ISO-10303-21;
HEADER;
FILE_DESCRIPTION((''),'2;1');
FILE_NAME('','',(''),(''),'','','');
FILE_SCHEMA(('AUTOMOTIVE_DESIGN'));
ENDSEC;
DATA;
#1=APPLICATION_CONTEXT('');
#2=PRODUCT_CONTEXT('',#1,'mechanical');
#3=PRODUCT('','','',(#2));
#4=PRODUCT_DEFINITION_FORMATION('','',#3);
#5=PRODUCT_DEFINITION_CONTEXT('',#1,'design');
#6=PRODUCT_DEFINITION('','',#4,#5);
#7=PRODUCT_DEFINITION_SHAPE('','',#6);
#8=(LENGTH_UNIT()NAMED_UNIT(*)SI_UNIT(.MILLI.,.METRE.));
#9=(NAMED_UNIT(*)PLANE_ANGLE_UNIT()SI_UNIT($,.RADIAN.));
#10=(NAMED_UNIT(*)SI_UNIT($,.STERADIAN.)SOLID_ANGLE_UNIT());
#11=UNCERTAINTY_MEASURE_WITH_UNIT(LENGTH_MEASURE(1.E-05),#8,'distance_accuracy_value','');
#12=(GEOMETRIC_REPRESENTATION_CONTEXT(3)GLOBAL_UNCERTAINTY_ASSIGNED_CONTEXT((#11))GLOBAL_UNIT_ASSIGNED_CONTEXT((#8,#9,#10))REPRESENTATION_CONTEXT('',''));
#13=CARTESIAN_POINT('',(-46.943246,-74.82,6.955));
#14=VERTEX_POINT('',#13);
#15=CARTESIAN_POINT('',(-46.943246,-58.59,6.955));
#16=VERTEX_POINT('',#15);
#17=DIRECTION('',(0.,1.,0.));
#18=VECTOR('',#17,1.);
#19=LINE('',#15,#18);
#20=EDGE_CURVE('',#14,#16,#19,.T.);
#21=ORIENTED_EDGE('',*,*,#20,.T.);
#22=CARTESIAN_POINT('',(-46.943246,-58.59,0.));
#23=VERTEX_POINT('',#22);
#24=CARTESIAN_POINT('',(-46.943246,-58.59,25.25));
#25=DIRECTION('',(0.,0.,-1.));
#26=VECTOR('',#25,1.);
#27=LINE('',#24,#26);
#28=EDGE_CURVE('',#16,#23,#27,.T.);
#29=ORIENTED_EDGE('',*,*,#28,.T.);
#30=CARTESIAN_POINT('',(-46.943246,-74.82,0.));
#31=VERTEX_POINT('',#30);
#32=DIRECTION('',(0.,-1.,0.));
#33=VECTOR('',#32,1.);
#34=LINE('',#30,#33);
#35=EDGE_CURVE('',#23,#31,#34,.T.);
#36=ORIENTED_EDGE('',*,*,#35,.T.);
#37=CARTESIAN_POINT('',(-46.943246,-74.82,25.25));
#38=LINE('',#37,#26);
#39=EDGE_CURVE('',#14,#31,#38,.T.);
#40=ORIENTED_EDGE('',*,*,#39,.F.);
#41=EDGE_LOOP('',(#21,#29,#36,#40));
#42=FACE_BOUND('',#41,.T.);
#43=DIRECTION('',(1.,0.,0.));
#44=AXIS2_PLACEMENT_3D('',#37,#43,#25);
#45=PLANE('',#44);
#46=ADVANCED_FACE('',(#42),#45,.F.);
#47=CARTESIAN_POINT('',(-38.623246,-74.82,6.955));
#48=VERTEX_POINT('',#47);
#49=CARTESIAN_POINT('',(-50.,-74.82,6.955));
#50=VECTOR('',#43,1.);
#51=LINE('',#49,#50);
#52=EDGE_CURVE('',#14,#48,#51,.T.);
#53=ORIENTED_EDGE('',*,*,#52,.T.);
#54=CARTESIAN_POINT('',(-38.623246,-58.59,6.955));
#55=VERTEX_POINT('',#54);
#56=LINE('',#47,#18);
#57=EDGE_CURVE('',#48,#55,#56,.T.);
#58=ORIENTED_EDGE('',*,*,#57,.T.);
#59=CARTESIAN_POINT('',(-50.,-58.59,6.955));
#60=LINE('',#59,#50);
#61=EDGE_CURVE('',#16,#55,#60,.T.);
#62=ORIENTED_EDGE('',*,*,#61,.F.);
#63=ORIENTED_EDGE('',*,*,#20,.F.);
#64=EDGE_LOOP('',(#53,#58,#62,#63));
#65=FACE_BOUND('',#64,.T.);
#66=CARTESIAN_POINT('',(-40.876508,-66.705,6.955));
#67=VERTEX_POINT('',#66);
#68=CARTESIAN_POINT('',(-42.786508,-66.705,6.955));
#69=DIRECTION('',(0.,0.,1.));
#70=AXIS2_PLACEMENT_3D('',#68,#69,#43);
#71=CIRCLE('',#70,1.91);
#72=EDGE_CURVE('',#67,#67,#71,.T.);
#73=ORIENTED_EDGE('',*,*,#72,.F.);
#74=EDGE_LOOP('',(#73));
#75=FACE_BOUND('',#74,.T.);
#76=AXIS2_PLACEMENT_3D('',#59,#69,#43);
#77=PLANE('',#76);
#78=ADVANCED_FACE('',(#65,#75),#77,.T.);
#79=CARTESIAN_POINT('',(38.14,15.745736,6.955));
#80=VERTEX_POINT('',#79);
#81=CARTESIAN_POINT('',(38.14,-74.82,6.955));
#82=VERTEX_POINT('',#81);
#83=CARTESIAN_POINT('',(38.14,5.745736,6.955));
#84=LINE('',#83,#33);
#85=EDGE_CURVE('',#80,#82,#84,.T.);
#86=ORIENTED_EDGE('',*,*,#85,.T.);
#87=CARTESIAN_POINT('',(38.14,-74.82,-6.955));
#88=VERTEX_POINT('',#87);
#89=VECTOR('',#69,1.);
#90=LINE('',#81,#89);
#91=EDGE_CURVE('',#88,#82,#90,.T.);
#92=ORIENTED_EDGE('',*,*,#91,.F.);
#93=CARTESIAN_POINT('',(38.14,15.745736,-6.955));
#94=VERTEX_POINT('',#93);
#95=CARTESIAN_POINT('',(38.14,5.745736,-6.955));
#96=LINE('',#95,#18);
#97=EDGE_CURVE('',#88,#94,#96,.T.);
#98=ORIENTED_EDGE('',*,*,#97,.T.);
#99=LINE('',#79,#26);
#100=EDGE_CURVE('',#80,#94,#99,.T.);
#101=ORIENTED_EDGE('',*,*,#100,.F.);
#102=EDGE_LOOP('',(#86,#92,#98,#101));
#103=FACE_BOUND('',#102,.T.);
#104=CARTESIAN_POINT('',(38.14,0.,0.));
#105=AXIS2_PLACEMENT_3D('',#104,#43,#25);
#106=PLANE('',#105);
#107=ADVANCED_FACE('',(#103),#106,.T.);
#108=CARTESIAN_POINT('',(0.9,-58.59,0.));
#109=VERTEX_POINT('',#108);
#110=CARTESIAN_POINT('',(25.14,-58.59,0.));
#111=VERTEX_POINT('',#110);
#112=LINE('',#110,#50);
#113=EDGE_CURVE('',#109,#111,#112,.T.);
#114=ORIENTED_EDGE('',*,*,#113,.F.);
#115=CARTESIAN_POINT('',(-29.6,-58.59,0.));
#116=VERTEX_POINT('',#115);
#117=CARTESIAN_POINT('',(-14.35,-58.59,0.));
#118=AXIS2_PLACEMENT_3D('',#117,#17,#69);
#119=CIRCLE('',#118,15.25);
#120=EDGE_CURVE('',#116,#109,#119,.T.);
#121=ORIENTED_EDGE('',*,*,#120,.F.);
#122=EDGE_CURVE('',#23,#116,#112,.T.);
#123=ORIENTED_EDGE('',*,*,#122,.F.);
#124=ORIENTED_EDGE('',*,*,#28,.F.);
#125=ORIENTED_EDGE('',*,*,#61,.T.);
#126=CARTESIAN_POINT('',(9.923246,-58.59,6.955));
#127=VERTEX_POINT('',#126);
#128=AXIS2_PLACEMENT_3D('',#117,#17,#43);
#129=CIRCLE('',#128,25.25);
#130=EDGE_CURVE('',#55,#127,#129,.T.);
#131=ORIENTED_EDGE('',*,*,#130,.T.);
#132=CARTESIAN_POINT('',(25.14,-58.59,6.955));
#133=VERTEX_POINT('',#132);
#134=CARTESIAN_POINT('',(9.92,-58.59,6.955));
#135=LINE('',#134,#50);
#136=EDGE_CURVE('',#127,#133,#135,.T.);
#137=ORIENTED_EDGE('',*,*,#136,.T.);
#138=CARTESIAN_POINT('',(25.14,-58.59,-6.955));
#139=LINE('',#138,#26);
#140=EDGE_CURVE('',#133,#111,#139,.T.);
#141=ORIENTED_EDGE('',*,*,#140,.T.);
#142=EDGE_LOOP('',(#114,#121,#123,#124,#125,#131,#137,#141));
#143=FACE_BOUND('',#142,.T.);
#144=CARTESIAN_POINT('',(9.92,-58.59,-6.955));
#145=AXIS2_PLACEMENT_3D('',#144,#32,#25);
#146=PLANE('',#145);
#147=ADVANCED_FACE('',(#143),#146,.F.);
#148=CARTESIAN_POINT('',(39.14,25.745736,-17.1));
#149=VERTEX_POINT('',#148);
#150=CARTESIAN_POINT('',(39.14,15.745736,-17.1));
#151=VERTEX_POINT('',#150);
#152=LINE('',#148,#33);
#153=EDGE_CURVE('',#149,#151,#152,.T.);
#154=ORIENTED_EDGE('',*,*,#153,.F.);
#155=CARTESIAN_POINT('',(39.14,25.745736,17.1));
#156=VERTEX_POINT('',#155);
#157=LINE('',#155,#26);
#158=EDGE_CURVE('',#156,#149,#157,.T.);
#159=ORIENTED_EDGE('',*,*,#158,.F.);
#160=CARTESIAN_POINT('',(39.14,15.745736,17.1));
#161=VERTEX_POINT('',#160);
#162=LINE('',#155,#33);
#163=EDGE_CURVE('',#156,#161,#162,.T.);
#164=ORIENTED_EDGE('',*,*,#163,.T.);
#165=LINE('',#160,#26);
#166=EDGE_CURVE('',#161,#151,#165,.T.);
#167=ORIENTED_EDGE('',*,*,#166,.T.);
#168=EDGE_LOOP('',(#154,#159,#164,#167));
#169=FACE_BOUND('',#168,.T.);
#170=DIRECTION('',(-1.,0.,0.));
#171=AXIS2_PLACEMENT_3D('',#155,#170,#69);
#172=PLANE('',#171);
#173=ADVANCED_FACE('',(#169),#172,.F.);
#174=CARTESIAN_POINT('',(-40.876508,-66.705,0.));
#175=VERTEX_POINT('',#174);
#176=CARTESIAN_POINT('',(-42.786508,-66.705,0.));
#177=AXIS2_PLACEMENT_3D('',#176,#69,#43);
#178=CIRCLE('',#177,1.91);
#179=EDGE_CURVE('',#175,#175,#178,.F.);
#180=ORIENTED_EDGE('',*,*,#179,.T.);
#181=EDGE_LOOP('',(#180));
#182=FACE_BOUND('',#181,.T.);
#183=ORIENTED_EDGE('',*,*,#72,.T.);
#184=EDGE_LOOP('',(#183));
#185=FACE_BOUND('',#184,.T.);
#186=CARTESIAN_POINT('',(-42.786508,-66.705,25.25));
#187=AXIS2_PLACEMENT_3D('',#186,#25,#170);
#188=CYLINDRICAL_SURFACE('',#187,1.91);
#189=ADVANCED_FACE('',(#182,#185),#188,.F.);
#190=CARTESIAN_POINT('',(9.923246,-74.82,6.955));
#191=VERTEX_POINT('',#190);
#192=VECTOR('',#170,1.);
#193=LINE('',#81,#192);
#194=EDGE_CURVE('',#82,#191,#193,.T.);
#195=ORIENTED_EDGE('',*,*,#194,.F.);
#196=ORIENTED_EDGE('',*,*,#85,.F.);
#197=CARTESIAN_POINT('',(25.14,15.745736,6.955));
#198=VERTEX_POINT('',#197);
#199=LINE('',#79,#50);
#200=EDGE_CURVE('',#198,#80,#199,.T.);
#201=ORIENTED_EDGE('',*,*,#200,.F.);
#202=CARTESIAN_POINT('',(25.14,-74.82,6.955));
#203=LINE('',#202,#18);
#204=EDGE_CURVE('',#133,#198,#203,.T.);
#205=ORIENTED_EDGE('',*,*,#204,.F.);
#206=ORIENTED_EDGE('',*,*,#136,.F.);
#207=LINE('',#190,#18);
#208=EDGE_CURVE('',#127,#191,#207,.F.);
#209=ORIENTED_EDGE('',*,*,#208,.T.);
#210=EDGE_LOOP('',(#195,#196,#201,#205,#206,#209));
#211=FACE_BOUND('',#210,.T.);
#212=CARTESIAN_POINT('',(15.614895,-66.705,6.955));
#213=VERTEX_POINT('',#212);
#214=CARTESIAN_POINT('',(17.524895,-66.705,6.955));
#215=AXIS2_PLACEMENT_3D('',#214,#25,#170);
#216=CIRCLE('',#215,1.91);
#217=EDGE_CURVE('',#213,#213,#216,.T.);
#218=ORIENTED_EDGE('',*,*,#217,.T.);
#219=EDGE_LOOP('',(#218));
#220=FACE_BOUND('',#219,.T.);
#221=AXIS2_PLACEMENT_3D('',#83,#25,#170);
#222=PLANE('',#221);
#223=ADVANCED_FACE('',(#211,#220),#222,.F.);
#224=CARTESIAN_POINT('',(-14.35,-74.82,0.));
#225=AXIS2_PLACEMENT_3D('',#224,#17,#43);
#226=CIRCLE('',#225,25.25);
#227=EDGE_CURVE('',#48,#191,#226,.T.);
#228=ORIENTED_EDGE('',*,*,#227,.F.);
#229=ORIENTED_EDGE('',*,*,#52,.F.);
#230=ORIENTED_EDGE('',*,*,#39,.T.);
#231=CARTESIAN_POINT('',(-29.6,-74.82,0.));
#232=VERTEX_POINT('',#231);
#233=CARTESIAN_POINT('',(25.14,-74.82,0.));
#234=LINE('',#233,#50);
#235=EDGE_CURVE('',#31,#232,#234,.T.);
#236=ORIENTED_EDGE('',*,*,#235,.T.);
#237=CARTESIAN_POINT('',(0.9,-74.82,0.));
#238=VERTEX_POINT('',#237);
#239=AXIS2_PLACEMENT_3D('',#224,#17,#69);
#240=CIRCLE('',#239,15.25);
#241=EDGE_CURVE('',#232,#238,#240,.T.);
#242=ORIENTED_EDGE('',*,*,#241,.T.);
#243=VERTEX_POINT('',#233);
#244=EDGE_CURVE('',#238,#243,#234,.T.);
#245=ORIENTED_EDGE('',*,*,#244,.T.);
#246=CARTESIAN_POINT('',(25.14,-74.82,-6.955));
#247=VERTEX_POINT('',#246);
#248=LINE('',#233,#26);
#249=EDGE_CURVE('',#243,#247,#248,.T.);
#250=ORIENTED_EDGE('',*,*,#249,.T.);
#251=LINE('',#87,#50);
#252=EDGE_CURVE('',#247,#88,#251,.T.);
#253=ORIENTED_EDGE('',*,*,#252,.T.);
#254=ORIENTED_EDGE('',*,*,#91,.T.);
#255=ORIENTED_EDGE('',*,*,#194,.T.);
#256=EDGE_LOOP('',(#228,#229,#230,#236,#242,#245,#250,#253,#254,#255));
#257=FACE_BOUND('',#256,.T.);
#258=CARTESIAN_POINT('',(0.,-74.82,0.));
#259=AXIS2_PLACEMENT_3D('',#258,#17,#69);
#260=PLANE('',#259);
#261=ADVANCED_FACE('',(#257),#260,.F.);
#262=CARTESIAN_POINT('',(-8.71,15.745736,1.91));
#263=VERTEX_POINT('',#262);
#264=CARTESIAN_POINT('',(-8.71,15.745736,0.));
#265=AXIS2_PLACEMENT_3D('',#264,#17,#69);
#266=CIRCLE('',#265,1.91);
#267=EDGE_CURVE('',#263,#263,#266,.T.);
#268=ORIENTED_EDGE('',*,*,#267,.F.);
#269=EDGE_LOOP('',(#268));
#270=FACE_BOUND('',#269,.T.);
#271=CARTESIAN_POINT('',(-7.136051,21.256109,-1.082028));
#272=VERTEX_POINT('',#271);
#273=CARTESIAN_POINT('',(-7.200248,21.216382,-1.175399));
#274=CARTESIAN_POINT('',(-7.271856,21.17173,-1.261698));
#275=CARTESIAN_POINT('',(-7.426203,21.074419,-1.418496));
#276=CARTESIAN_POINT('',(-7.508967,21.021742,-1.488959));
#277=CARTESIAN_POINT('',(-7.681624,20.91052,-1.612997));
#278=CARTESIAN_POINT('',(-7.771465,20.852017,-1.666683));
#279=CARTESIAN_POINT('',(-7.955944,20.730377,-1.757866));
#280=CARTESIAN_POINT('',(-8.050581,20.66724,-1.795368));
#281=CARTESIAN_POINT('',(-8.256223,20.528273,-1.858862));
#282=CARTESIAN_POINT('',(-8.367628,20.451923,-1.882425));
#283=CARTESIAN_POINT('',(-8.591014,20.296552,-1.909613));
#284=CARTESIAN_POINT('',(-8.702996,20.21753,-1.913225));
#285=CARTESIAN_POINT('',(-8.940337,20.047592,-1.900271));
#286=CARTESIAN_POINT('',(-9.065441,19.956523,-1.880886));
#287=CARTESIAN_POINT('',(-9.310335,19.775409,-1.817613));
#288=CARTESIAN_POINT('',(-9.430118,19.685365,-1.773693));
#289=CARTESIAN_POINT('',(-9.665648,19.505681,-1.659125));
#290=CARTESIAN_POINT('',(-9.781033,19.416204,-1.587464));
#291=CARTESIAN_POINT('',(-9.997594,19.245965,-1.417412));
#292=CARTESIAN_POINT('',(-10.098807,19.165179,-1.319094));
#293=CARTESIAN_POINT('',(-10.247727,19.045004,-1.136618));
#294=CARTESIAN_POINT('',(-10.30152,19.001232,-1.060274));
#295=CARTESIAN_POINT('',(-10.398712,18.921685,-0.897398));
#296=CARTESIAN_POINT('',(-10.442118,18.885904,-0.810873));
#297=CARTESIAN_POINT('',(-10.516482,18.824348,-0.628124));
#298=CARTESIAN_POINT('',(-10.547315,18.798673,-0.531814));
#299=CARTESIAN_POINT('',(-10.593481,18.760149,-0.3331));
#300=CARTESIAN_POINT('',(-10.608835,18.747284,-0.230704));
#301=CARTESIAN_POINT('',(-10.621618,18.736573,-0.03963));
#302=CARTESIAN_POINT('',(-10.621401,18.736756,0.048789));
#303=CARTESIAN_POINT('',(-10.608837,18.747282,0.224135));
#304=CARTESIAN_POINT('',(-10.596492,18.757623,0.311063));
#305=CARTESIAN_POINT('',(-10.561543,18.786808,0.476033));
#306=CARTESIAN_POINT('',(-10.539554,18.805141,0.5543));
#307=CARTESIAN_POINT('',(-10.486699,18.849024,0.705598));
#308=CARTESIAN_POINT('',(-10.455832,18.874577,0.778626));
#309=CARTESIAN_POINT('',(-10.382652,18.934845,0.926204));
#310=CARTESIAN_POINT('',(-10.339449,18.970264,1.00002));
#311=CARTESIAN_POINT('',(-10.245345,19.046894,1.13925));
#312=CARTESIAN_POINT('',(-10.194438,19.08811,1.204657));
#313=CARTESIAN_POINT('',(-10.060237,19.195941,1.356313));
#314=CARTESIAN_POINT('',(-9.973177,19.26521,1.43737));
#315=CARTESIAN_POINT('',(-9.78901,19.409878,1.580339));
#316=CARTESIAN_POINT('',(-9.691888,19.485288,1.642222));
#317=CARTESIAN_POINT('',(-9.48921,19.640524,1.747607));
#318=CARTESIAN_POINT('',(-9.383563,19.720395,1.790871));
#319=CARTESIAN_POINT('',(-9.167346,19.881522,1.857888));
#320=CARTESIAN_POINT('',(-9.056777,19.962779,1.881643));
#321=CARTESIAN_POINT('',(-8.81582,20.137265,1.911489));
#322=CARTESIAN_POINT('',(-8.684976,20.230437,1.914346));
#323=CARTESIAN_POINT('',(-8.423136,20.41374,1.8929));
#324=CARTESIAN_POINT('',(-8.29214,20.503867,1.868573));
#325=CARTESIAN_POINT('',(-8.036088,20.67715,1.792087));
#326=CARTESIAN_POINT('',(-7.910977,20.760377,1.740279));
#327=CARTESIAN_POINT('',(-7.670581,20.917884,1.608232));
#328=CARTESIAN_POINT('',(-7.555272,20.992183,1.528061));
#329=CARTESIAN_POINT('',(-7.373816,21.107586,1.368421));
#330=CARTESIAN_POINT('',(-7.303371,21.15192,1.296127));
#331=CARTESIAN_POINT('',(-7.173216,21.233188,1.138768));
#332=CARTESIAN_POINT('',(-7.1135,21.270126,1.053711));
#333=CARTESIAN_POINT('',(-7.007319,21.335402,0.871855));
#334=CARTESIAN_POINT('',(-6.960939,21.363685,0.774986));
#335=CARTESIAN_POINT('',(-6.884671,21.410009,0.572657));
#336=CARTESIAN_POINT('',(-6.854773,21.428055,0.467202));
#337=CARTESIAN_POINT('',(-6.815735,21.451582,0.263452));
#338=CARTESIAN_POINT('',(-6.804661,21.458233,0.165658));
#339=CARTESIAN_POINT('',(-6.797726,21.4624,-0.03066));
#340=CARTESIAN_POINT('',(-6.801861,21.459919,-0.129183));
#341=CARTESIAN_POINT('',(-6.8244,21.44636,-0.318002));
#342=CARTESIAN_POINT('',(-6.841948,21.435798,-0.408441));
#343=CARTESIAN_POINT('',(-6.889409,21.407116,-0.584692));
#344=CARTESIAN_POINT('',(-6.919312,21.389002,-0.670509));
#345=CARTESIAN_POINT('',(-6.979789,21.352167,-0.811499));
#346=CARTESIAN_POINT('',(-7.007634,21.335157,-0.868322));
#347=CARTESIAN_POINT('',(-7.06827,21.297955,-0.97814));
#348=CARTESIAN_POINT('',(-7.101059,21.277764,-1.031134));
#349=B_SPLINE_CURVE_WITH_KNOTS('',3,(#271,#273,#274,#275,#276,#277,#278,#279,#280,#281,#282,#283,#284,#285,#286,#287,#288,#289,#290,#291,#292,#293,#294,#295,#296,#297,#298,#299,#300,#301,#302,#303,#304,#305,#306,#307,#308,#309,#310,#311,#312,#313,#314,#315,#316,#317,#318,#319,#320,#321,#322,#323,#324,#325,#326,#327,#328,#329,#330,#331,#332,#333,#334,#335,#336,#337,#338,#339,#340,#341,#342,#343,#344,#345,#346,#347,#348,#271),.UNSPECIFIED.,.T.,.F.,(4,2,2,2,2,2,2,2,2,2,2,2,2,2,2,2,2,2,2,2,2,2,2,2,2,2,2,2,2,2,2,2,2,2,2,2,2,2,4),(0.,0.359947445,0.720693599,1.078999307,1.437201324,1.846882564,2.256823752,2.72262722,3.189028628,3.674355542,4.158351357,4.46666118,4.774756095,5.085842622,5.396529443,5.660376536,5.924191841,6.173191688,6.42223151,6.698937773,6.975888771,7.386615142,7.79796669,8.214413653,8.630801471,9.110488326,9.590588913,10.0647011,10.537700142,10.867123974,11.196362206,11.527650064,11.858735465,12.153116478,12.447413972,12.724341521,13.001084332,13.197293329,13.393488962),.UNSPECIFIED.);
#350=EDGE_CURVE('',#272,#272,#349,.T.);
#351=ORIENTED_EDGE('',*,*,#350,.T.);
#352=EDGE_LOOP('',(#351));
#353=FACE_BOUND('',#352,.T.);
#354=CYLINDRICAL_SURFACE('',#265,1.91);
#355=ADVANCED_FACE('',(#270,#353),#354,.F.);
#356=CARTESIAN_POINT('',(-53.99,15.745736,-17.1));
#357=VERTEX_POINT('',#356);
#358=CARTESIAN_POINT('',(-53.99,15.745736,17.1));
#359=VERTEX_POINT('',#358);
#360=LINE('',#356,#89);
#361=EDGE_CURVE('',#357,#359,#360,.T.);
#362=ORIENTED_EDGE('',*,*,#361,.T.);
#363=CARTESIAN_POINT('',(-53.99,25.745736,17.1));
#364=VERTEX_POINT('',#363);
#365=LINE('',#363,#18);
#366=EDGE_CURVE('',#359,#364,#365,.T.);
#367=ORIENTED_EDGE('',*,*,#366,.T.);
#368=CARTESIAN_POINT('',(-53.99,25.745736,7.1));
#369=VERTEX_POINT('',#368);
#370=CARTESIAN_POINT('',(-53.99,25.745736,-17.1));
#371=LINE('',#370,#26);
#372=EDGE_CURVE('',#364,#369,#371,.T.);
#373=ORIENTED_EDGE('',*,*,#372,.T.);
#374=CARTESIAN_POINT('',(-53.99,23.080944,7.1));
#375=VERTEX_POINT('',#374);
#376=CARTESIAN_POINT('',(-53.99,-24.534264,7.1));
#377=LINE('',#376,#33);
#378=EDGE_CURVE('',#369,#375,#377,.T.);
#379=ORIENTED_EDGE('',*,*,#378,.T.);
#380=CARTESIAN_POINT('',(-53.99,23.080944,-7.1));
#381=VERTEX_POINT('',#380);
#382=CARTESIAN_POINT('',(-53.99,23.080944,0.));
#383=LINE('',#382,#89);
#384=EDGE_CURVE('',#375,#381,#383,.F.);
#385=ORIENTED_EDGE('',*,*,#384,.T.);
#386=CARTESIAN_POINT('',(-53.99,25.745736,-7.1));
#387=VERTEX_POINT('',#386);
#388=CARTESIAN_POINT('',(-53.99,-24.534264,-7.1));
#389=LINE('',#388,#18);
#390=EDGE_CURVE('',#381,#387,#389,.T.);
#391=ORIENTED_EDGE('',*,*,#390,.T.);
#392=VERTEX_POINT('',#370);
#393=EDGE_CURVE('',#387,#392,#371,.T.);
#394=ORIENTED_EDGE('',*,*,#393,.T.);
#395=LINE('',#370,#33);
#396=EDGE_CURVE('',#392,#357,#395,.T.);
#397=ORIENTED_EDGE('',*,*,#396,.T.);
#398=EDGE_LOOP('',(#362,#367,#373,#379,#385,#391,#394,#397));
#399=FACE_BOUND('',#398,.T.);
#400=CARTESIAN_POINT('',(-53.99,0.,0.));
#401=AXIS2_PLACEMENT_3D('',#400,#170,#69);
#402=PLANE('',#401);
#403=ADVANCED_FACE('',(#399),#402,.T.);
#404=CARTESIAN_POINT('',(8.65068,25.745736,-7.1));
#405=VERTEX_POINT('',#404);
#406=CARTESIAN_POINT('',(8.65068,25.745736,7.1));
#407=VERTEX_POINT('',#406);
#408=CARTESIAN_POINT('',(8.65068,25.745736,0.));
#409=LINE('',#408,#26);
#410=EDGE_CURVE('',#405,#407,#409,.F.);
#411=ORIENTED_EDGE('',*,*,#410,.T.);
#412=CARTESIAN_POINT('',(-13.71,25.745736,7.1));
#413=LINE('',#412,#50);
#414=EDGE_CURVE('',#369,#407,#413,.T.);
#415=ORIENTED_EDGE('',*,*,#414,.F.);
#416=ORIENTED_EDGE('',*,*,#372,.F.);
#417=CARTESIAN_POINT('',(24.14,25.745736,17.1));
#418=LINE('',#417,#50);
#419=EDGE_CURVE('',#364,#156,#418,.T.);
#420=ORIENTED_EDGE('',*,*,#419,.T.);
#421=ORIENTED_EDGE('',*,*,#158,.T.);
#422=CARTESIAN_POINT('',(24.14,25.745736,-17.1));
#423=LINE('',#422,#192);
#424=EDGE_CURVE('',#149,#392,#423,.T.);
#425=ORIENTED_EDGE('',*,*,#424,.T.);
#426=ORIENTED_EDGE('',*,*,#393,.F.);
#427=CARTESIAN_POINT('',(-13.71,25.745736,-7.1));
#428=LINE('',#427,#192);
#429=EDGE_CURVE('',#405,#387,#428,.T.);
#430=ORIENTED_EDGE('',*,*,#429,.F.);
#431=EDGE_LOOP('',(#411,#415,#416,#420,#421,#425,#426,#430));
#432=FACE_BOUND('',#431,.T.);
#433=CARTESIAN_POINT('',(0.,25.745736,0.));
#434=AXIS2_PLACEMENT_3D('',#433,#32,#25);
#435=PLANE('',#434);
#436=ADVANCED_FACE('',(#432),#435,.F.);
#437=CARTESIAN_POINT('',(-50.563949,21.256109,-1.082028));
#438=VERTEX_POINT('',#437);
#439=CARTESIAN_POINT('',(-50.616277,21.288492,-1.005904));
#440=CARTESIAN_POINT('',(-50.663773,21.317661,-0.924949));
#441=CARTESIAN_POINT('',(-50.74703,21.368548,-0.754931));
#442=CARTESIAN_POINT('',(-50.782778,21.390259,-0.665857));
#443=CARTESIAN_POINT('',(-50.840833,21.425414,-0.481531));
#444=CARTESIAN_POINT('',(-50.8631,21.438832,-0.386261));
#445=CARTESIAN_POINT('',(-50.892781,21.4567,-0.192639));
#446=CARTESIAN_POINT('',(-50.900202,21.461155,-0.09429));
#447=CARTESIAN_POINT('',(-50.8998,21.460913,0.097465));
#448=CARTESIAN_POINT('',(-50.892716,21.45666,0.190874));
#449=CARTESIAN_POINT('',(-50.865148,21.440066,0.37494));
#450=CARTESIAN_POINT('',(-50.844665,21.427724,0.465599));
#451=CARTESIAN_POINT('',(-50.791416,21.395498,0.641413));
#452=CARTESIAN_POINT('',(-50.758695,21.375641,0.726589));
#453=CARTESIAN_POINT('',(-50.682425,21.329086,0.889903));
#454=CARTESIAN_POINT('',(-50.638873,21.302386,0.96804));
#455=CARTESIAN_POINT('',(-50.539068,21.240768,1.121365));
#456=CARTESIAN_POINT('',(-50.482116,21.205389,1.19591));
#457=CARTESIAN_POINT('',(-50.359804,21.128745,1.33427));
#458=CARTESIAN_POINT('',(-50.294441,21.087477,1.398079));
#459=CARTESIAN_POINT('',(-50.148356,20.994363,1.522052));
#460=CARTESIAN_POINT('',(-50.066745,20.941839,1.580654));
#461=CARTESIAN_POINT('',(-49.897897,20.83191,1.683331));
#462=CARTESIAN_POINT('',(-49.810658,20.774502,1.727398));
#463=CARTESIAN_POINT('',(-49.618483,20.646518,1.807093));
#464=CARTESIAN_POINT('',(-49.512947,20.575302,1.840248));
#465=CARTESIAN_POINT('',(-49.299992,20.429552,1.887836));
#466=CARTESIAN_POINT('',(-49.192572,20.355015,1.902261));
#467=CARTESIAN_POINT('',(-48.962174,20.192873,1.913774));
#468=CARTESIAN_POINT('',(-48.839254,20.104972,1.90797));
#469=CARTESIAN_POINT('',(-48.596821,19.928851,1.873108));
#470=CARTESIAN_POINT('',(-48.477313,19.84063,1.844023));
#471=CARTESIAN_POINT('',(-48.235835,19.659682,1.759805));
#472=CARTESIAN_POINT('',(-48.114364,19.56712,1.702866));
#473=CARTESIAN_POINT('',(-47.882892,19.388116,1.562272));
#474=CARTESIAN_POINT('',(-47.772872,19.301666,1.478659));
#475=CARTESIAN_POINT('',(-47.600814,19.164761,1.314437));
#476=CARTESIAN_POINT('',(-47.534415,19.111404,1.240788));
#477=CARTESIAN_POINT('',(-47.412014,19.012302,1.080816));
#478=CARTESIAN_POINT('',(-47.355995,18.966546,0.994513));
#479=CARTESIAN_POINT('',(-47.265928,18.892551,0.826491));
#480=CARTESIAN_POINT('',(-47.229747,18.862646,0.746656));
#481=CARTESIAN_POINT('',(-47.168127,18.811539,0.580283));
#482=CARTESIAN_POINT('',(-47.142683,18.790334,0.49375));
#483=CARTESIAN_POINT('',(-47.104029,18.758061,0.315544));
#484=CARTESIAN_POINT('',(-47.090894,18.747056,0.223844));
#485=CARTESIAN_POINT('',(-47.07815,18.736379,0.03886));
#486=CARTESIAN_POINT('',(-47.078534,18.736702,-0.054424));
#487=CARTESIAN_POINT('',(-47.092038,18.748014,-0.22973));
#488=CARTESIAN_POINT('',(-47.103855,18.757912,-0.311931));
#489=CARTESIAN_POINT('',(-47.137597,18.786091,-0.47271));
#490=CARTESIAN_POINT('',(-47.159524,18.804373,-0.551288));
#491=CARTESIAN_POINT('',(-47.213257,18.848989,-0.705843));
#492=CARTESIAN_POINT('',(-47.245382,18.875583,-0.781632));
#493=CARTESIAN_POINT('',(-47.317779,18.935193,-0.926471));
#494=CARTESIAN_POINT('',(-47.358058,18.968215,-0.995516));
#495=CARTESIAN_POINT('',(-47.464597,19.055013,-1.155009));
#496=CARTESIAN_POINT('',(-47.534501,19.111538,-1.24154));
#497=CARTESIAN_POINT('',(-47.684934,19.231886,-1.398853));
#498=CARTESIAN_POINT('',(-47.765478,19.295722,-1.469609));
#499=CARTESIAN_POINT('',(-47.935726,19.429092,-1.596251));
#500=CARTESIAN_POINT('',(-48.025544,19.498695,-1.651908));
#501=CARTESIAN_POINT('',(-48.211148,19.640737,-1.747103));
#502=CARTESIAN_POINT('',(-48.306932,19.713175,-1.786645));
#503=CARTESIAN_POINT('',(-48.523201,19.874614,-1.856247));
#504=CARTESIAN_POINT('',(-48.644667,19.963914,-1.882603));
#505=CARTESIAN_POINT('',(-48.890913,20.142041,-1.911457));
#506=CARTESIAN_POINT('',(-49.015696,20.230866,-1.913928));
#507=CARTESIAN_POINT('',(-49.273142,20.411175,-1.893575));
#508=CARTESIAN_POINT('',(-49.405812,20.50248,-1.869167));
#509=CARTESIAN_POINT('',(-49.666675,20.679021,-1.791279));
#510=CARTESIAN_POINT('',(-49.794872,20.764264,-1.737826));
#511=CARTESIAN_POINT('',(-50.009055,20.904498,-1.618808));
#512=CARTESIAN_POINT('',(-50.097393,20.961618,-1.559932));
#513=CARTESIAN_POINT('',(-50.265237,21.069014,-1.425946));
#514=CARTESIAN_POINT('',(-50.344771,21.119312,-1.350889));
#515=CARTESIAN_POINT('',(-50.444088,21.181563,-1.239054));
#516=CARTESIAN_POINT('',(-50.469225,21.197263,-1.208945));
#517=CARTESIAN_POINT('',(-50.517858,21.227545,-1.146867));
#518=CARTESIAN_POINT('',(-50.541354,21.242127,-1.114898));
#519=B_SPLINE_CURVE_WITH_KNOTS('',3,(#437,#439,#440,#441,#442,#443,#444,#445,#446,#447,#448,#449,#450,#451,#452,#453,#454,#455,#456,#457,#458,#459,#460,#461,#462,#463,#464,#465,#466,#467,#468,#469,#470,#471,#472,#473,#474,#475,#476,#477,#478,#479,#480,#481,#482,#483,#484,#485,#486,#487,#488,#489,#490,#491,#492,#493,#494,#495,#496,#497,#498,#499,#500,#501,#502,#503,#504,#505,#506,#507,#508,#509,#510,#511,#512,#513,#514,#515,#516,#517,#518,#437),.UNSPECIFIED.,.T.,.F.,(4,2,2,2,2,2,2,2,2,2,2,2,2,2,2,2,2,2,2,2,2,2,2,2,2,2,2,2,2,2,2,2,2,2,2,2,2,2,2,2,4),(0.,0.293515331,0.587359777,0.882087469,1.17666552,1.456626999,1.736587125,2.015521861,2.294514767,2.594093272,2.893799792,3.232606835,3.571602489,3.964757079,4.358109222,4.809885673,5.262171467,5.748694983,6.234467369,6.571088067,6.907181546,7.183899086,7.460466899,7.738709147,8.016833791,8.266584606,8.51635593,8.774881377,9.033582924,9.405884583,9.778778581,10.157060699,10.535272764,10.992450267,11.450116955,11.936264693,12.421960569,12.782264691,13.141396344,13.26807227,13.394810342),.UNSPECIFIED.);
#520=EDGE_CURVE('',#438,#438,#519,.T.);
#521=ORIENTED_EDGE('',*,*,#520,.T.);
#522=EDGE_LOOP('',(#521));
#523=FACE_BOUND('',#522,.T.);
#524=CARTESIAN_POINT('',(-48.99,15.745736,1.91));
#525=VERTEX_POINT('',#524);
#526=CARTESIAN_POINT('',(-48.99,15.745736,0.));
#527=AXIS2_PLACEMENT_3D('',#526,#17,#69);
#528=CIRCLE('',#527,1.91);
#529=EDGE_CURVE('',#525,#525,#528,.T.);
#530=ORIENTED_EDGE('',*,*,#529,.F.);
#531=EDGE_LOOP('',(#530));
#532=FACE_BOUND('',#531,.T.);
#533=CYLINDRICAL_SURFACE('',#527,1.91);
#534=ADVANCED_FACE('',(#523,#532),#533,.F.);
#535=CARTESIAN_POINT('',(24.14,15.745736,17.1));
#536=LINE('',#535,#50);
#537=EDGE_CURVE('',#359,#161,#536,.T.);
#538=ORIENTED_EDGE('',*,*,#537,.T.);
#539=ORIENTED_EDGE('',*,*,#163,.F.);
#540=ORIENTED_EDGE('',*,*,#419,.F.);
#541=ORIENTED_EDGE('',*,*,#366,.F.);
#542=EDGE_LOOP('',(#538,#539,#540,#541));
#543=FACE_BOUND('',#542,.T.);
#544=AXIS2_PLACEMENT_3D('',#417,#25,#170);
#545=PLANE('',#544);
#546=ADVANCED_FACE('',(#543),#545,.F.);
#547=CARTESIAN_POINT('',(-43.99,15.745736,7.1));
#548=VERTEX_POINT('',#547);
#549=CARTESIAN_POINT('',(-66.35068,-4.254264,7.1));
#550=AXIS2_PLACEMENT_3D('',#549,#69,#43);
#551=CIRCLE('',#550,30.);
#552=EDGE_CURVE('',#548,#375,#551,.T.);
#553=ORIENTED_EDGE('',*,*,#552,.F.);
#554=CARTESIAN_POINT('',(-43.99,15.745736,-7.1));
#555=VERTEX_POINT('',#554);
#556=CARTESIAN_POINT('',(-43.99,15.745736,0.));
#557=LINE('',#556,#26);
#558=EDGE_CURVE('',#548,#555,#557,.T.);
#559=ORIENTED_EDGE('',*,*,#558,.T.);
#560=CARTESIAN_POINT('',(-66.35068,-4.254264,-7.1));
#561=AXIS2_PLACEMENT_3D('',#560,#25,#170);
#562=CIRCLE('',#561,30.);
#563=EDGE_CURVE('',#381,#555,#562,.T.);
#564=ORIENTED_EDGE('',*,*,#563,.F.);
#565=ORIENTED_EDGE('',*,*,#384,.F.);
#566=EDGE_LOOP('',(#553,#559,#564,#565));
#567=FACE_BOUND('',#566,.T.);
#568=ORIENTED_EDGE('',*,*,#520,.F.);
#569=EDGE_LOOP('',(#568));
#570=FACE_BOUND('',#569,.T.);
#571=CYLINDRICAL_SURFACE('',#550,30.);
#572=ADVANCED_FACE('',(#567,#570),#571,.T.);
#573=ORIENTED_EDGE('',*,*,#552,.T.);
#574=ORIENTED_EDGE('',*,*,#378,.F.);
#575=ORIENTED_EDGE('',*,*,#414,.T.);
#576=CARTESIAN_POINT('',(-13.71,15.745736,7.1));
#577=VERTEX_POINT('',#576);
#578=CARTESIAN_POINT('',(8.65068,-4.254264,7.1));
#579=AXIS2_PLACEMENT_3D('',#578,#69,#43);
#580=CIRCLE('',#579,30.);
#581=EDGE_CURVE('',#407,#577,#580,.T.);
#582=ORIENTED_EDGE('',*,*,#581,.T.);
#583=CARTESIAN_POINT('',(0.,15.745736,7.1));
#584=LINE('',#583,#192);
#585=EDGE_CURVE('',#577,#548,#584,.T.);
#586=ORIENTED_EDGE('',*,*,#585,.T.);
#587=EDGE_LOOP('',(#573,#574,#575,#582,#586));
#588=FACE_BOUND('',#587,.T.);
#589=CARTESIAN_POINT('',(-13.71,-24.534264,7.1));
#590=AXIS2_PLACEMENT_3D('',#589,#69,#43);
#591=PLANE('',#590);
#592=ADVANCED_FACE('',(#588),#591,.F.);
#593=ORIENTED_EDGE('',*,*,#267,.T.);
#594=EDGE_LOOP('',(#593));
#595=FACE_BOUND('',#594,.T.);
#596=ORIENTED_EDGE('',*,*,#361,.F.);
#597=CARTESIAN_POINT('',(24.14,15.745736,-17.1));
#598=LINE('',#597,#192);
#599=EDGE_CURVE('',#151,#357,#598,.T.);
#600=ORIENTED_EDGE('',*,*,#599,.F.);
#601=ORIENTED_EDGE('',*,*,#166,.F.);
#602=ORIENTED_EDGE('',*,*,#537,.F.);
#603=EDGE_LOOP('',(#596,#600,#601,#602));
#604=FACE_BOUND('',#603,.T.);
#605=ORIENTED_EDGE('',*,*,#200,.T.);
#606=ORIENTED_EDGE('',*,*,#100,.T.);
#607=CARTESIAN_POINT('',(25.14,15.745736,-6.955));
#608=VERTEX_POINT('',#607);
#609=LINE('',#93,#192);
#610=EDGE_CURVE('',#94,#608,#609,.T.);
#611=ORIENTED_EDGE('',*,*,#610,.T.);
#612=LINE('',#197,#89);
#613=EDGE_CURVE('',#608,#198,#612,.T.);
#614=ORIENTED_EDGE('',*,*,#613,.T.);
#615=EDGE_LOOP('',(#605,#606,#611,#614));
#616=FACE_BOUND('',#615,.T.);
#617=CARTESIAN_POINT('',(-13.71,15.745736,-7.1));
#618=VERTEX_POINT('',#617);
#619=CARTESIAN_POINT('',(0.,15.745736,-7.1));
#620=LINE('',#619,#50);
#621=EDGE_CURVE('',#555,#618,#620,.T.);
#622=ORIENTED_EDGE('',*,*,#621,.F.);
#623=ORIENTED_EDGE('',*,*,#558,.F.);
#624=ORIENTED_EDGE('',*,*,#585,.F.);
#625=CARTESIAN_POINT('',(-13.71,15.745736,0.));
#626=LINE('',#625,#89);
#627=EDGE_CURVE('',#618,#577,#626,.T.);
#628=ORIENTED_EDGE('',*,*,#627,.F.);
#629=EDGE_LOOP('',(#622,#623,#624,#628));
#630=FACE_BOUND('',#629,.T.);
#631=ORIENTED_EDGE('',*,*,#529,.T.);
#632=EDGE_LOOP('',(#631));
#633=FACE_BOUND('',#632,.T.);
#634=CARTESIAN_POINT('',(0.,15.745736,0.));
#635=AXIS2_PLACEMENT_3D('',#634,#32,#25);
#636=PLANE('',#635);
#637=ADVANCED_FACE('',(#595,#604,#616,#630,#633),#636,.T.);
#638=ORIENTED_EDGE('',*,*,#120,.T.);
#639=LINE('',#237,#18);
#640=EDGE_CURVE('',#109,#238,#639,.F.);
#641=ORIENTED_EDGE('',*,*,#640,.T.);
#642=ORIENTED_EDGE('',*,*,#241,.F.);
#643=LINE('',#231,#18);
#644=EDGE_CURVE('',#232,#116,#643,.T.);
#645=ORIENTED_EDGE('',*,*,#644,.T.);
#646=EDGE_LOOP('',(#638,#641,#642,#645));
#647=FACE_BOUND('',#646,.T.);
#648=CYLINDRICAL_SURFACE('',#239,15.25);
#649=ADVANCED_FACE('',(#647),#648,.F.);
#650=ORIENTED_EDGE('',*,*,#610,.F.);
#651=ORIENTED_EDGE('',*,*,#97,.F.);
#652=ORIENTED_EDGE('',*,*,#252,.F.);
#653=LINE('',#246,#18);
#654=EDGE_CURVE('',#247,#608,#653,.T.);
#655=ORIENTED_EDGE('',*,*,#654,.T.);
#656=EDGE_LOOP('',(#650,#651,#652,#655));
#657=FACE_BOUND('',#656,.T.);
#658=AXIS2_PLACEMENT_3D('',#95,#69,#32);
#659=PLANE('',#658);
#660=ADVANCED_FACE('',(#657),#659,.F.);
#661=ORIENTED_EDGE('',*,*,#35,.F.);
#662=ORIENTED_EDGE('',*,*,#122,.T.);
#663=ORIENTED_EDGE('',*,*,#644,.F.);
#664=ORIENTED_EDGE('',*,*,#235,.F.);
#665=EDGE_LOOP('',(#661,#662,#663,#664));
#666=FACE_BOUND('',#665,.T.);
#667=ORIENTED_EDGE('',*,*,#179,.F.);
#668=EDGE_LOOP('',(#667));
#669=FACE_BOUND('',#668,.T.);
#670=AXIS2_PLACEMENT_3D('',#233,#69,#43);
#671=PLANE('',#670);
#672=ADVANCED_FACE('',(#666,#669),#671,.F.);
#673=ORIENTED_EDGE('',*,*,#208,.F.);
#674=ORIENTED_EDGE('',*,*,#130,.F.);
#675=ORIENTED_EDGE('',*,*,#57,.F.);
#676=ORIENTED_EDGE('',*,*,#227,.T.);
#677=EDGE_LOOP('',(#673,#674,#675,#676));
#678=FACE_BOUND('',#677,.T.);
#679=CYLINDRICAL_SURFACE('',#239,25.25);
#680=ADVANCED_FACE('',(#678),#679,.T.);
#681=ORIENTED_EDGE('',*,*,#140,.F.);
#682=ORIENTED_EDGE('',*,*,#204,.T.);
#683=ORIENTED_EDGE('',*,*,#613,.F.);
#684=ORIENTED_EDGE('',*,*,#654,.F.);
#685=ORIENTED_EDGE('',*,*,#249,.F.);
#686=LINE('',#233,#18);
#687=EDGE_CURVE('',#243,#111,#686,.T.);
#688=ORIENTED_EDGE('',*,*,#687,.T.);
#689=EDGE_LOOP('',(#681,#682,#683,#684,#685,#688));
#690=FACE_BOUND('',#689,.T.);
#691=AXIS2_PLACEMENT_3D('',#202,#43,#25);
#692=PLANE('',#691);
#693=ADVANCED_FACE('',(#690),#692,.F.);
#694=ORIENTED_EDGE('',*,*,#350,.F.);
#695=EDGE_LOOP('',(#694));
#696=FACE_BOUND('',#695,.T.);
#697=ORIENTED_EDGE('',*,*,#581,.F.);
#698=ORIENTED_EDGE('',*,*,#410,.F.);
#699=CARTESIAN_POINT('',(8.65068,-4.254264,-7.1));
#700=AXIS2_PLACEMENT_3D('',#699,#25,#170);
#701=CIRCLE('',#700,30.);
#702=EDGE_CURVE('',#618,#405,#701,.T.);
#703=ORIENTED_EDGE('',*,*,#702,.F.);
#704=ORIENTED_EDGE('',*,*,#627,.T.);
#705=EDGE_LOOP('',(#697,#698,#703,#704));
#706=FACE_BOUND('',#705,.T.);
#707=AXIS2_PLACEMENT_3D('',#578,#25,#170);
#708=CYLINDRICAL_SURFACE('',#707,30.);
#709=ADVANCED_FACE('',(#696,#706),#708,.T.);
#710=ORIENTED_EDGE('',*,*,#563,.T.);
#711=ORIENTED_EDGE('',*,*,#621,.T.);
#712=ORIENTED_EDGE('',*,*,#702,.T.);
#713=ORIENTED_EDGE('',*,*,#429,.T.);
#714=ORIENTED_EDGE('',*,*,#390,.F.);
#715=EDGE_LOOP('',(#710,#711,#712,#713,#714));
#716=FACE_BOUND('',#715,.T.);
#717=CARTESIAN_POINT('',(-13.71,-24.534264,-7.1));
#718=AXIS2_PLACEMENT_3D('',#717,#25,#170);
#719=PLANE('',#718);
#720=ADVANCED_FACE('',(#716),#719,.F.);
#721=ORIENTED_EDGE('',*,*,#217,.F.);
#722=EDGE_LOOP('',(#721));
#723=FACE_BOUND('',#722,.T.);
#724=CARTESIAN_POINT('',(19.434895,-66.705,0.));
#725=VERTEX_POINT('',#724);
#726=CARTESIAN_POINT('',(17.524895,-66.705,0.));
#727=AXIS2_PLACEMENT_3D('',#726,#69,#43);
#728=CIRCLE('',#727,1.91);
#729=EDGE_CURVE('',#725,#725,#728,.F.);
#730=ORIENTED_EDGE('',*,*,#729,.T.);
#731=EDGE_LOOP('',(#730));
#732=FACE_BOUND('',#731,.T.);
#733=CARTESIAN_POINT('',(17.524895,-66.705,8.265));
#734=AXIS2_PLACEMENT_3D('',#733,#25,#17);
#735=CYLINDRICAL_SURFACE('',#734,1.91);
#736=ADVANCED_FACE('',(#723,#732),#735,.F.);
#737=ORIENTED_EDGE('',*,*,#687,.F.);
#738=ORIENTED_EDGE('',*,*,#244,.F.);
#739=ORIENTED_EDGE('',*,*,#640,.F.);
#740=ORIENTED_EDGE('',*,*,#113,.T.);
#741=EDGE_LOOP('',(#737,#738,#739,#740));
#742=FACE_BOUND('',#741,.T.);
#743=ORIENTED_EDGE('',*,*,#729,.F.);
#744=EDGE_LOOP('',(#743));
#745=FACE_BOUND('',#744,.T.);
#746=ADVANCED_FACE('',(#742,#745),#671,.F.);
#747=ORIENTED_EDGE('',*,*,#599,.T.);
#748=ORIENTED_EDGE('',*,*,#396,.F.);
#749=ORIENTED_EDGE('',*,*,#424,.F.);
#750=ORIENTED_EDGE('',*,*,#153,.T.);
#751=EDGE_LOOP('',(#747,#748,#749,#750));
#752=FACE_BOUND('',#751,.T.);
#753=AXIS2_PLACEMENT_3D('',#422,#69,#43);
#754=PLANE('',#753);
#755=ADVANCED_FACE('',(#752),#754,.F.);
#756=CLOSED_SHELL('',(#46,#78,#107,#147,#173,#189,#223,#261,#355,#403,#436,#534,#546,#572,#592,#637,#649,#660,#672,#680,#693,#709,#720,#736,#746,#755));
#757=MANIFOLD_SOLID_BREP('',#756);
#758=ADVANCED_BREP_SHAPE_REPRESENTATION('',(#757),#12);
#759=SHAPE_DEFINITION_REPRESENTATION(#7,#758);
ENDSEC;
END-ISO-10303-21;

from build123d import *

# Parameters (mm, degrees)
SKETCH_1_W                = 50.28
SKETCH_1_H                = 34.2
SKETCH_1_W_2              = 30.28
SKETCH_1_H_2              = 14.2
EXTRUDE_1_DEPTH           = 12.25
SKETCH_4_W                = 13
SKETCH_4_H                = 13.91
EXTRUDE_1_2_DEPTH         = 74.82
SKETCH_5_W                = 13.91
SKETCH_5_H                = 16.23
EXTRUDE_2_DEPTH           = 16
SKETCH_7_R                = 25.25
SKETCH_7_R_2              = 15.25
EXTRUDE_2_2_DEPTH         = 16.23
SKETCH_15_R               = 1.91
CUT_EXTRUDE_6_DEPTH       = 97.964478439
SKETCH_18_W               = 49.344544624
SKETCH_18_H               = 6.125
CUT_EXTRUDE_8_DEPTH       = 101.789238284
SKETCH_19_W               = 34.2
SKETCH_19_H               = 6.125
CUT_EXTRUDE_9_DEPTH       = 10
SKETCH_21_R               = 1.91
CUT_EXTRUDE_10_DEPTH      = 10
SKETCH_20_R               = 1.91
CUT_EXTRUDE_11_DEPTH      = 10
FILLET_START              = -7.1
FILLET_1_DEPTH            = 14.2
FILLET_2_DEPTH            = 14.2
SKETCH_29_W               = 13.91
SKETCH_29_H               = 74.82
EXTRUDE_5_DEPTH           = 10
SKETCH_30_W               = 10
SKETCH_30_H               = 58.59
CUT_EXTRUDE_13_DEPTH      = 97.964478439
SKETCH_32_W               = 34.2
SKETCH_32_H               = 5.745736365
EXTRUDE_6_DEPTH           = 10
CUT_EXTRUDE_16_DEPTH      = 50
CUT_EXTRUDE_16_DEPTH_BACK = 50
SKETCH_38_W               = 116.985630298
SKETCH_38_H               = 80.538350638
SKETCH_41_W               = 13.91
SKETCH_41_H               = 5.745736365
EXTRUDE_7_DEPTH           = 3
SKETCH_42_W               = 13
SKETCH_42_H               = 13.91
EXTRUDE_8_DEPTH           = 74.82
SKETCH_43_W               = 13.91
SKETCH_43_H               = 16.23
EXTRUDE_9_DEPTH           = 15.22
SKETCH_44_R               = 1.91
CUT_EXTRUDE_17_DEPTH      = 15.22
SKETCH_46_R               = 25.25
SKETCH_46_R_2             = 15.25
EXTRUDE_6_2_DEPTH         = 16.23
EXTRUDE_10_DEPTH          = 7.22
EXTRUDE_10_DEPTH_BACK     = 10
SKETCH_47_W               = 13.91
SKETCH_47_H               = 16.23
SKETCH_50_W               = 3.056753925
SKETCH_50_H               = 16.23
CUT_EXTRUDE_18_DEPTH      = 96.578211037
SKETCH_51_R               = 1.91
CUT_EXTRUDE_19_DEPTH      = 95.015226304
SKETCH_52_W               = 92.841945613
SKETCH_52_H               = 30
CUT_EXTRUDE_20_DEPTH      = 84.840694713
CUT_EXTRUDE_22_DEPTH      = 50
CUT_EXTRUDE_22_DEPTH_BACK = 50
SKETCH_53_W               = 63.541345486
SKETCH_53_H               = 14.170740414
SKETCH_54_W               = 10
SKETCH_54_H               = 10.145
CUT_EXTRUDE_23_DEPTH      = 50
SKETCH_55_W               = 13
SKETCH_55_H               = 13.91
EXTRUDE_11_DEPTH          = 10
SKETCH_57_W               = 15
SKETCH_57_H               = 34.2
EXTRUDE_12_DEPTH          = 10
SKETCH_58_W               = 34.2
SKETCH_58_H               = 10
EXTRUDE_13_DEPTH          = 27.85
SKETCH_60_W               = 34.2
SKETCH_60_H               = 10
EXTRUDE_14_DEPTH          = 50.28
SKETCH_62_W               = 30.28
SKETCH_62_H               = 14.2
CUT_EXTRUDE_24_DEPTH      = 50.28
SKETCH_64_R               = 1.91
CUT_EXTRUDE_25_DEPTH      = 10
FILLET_3_R                = 30


with BuildPart() as part:
    # 草圖1 → Extrude 1 (new body)
    with BuildSketch(Plane(origin=(0, 0, 0), x_dir=(1, 0, 0), z_dir=(0, 1, 0))):
        Rectangle(SKETCH_1_W, SKETCH_1_H)
        Rectangle(SKETCH_1_W_2, SKETCH_1_H_2, mode=Mode.SUBTRACT)
    extrude(amount=EXTRUDE_1_DEPTH)

    # 草圖4 → Extrude 1 2 (add)
    with BuildSketch(Plane.XZ):
        with Locations((18.64, 0)):
            Rectangle(SKETCH_4_W, SKETCH_4_H)
    extrude(amount=EXTRUDE_1_2_DEPTH)

    # 草圖5 → Extrude 2 (add)
    with BuildSketch(Plane.ZY.offset(-12.14)):
        with Locations((0, -66.705)):
            Rectangle(SKETCH_5_W, SKETCH_5_H)
    extrude(amount=EXTRUDE_2_DEPTH)

    # 草圖7 → Extrude 2 2 (add)
    with BuildSketch(Plane(origin=(3.626674765, -74.82, 0), x_dir=(1, 0, 0), z_dir=(0, -1, 0))):
        with Locations((-30.978154344, 0)):
            Circle(SKETCH_7_R)
        with Locations((-30.978154344, 0)):
            Circle(SKETCH_7_R_2, mode=Mode.SUBTRACT)
    extrude(amount=-EXTRUDE_2_2_DEPTH)

    # 草圖15 → 除料-伸長6 (cut, through all)
    with BuildSketch(Plane(origin=(0, 0, -6.955), x_dir=(-1, 0, 0), z_dir=(0, 0, -1))):
        with Locations((-4.530883248, -66.705)):
            Circle(SKETCH_15_R)
    extrude(amount=-CUT_EXTRUDE_6_DEPTH, mode=Mode.SUBTRACT)

    # 草圖18 → 除料-伸長8 (cut, through all)
    with BuildSketch(Plane(origin=(0, 0, -17.1), x_dir=(-1, 0, 0), z_dir=(0, 0, -1))):
        with Locations((0.467727688, 9.1875)):
            Rectangle(SKETCH_18_W, SKETCH_18_H)
    extrude(amount=-CUT_EXTRUDE_8_DEPTH, mode=Mode.SUBTRACT)

    # 草圖19 → 除料-伸長9 (cut)
    with BuildSketch(Plane.ZY.offset(-24.204544624)):
        with Locations((0, 9.1875)):
            Rectangle(SKETCH_19_W, SKETCH_19_H)
    extrude(amount=-CUT_EXTRUDE_9_DEPTH, mode=Mode.SUBTRACT)

    # 草圖21 → 除料-伸長10 (cut)
    with BuildSketch(Plane(origin=(0, 6.125, 0), x_dir=(1, 0, 0), z_dir=(0, 1, 0))):
        with Locations(Location((17.69, 0, 0), (0, 0, 270))):
            Circle(SKETCH_21_R)
    extrude(amount=-CUT_EXTRUDE_10_DEPTH, mode=Mode.SUBTRACT)

    # 草圖20 → 除料-伸長11 (cut)
    with BuildSketch(Plane(origin=(0, 6.125, 0), x_dir=(1, 0, 0), z_dir=(0, 1, 0))):
        with Locations(Location((-17.395, 0, 0), (0, 0, 270))):
            Circle(SKETCH_20_R)
    extrude(amount=-CUT_EXTRUDE_11_DEPTH, mode=Mode.SUBTRACT)

    # 圓角1: read off the stored shape, not the designer's step
    # 圓角1 outline → 圓角1 (cut)
    with BuildSketch(Plane.XY.offset(FILLET_START)):
        with BuildLine():
            add(Edge.make_bspline(
                [(-15.14, 0), (-21.974170252, 5.199829476), (-25.14, 5.745736365)],
                knots=[0, 0, 0, 0.664102345, 0.664102345, 0.664102345], degree=2, weights=[1, 2.223777218, 1.822127795]))
            Line((-15.14, 0), (-15.14, 6.125))
            Line((-15.14, 6.125), (-25.14, 6.125))
            Line((-25.14, 6.125), (-25.14, 5.745736365))
        make_face()
    extrude(amount=FILLET_1_DEPTH, mode=Mode.SUBTRACT)

    # 圓角2: read off the stored shape, not the designer's step
    # 圓角2 outline → 圓角2 (cut)
    with BuildSketch(Plane.XY.offset(FILLET_START)):
        with BuildLine():
            Line((15.14, 6.125), (15.14, 0))
            add(Edge.make_bspline(
                [(15.14, 0), (21.974170252, 5.199829476), (25.14, 5.745736365)],
                knots=[0, 0, 0, 0.664102345, 0.664102345, 0.664102345], degree=2, weights=[1, 2.223777218, 1.822127795]))
            Line((25.14, 5.745736365), (25.14, 6.125))
            Line((25.14, 6.125), (15.14, 6.125))
        make_face()
    extrude(amount=FILLET_2_DEPTH, mode=Mode.SUBTRACT)

    # 草圖29 → 填料-伸長5 (add)
    with BuildSketch(Plane(origin=(25.14, 0, 0), x_dir=(0, 0, -1), z_dir=(1, 0, 0))):
        with Locations((0, -37.41)):
            Rectangle(SKETCH_29_W, SKETCH_29_H)
    extrude(amount=EXTRUDE_5_DEPTH)

    # 草圖30 → 除料-伸長13 (cut, through all)
    with BuildSketch(Plane.XY.offset(6.955)):
        with Locations((17.14, -29.295)):
            Rectangle(SKETCH_30_W, SKETCH_30_H)
    extrude(amount=-CUT_EXTRUDE_13_DEPTH, mode=Mode.SUBTRACT)

    # 草圖32 → Extrude 6 (add)
    with BuildSketch(Plane(origin=(25.14, 0, 0), x_dir=(0, 0, -1), z_dir=(1, 0, 0))):
        with Locations((0, 2.872868182)):
            Rectangle(SKETCH_32_W, SKETCH_32_H)
    extrude(amount=EXTRUDE_6_DEPTH)

    # 草圖38 → 除料-伸長16 (cut, two sides: drawn at the far end of the back side and taken through both)
    with BuildSketch(Plane(origin=(0, 0, -6.955), x_dir=(-1, 0, 0), z_dir=(0, 0, -1)).offset(-CUT_EXTRUDE_16_DEPTH_BACK)):
        with Locations((7.268869252, -40.269175319)):
            Rectangle(SKETCH_38_W, SKETCH_38_H)
    extrude(amount=CUT_EXTRUDE_16_DEPTH + CUT_EXTRUDE_16_DEPTH_BACK, mode=Mode.SUBTRACT)

    # 草圖41 → 填料-伸長7 (add)
    with BuildSketch(Plane(origin=(35.14, 0, 0), x_dir=(0, 0, -1), z_dir=(1, 0, 0))):
        with Locations((0, 2.872868182)):
            Rectangle(SKETCH_41_W, SKETCH_41_H)
    extrude(amount=EXTRUDE_7_DEPTH)

    # 草圖42 → 填料-伸長8 (add)
    with BuildSketch(Plane(origin=(0, 0, 0), x_dir=(-1, 0, 0), z_dir=(0, -1, 0))):
        with Locations((-31.64, 0)):
            Rectangle(SKETCH_42_W, SKETCH_42_H)
    extrude(amount=EXTRUDE_8_DEPTH)

    # 草圖43 → 填料-伸長9 (add)
    with BuildSketch(Plane.ZY.offset(-25.14)):
        with Locations((0, -66.705)):
            Rectangle(SKETCH_43_W, SKETCH_43_H)
    extrude(amount=EXTRUDE_9_DEPTH)

    # 草圖44 → 除料-伸長17 (cut)
    with BuildSketch(Plane(origin=(0, 0, -6.955), x_dir=(-1, 0, 0), z_dir=(0, 0, -1))):
        with Locations(Location((-17.524895264, -66.705, 0), (0, 0, 90))):
            Circle(SKETCH_44_R)
    extrude(amount=-CUT_EXTRUDE_17_DEPTH, mode=Mode.SUBTRACT)

    # 草圖46 → Extrude 6 2 (add)
    with BuildSketch(Plane(origin=(0, -58.59, 0), x_dir=(1, 0, 0), z_dir=(0, 1, 0))):
        with Locations((-14.35, 0)):
            Circle(SKETCH_46_R)
        with Locations((-14.35, 0)):
            Circle(SKETCH_46_R_2, mode=Mode.SUBTRACT)
    extrude(amount=-EXTRUDE_6_2_DEPTH)

    # 草圖47 → 填料-伸長10 (add, two sides: drawn at the far end of the back side and taken through both)
    with BuildSketch(Plane(origin=(-40, 0, 0), x_dir=(0, 0, -1), z_dir=(1, 0, 0)).offset(-EXTRUDE_10_DEPTH_BACK)):
        with Locations((0, -66.705)):
            Rectangle(SKETCH_47_W, SKETCH_47_H)
    extrude(amount=EXTRUDE_10_DEPTH + EXTRUDE_10_DEPTH_BACK)

    # 草圖50 → 除料-伸長18 (cut, through all)
    with BuildSketch(Plane(origin=(0, 0, -6.955), x_dir=(-1, 0, 0), z_dir=(0, 0, -1))):
        with Locations((48.471623038, -66.705)):
            Rectangle(SKETCH_50_W, SKETCH_50_H)
    extrude(amount=-CUT_EXTRUDE_18_DEPTH, mode=Mode.SUBTRACT)

    # 草圖51 → 除料-伸長19 (cut, through all)
    with BuildSketch(Plane(origin=(0, 0, -6.955), x_dir=(-1, 0, 0), z_dir=(0, 0, -1))):
        with Locations((42.786508152, -66.705)):
            Circle(SKETCH_51_R)
    extrude(amount=-CUT_EXTRUDE_19_DEPTH, mode=Mode.SUBTRACT)

    # 草圖52 → 除料-伸長20 (cut, through all)
    with BuildSketch(Plane(origin=(0, -58.59, 0), x_dir=(1, 0, 0), z_dir=(0, 1, 0))):
        with Locations((-21.280972807, 15)):
            Rectangle(SKETCH_52_W, SKETCH_52_H)
    extrude(amount=-CUT_EXTRUDE_20_DEPTH, mode=Mode.SUBTRACT)

    # 草圖53 → 除料-伸長22 (cut, two sides: drawn at the far end of the back side and taken through both)
    with BuildSketch(Plane(origin=(0, 0, -6.955), x_dir=(-1, 0, 0), z_dir=(0, 0, -1)).offset(-CUT_EXTRUDE_22_DEPTH_BACK)):
        with Locations((6.630672743, -0.960370207)):
            Rectangle(SKETCH_53_W, SKETCH_53_H)
    extrude(amount=CUT_EXTRUDE_22_DEPTH + CUT_EXTRUDE_22_DEPTH_BACK, mode=Mode.SUBTRACT)

    # 草圖54 → 除料-伸長23 (cut)
    with BuildSketch(Plane(origin=(0, 5.745736365, 0), x_dir=(1, 0, 0), z_dir=(0, 1, 0))):
        with Locations((30.14, -12.0275)):
            Rectangle(SKETCH_54_W, SKETCH_54_H)
        with Locations((30.14, 12.0275)):
            Rectangle(SKETCH_54_W, SKETCH_54_H)
    extrude(amount=-CUT_EXTRUDE_23_DEPTH, mode=Mode.SUBTRACT)

    # 草圖55 → 填料-伸長11 (add)
    with BuildSketch(Plane(origin=(0, 5.745736365, 0), x_dir=(1, 0, 0), z_dir=(0, 1, 0))):
        with Locations((31.64, 0)):
            Rectangle(SKETCH_55_W, SKETCH_55_H)
    extrude(amount=EXTRUDE_11_DEPTH)

    # 草圖57 → 填料-伸長12 (add)
    with BuildSketch(Plane(origin=(0, 15.745736365, 0), x_dir=(1, 0, 0), z_dir=(0, 1, 0))):
        with Locations((31.64, 0)):
            Rectangle(SKETCH_57_W, SKETCH_57_H)
    extrude(amount=EXTRUDE_12_DEPTH)

    # 草圖58 → 填料-伸長13 (add)
    with BuildSketch(Plane.ZY.offset(-24.14)):
        with Locations((0, 20.745736365)):
            Rectangle(SKETCH_58_W, SKETCH_58_H)
    extrude(amount=EXTRUDE_13_DEPTH)

    # 草圖60 → 填料-伸長14 (add)
    with BuildSketch(Plane.ZY.offset(3.71)):
        with Locations((0, 20.745736365)):
            Rectangle(SKETCH_60_W, SKETCH_60_H)
    extrude(amount=EXTRUDE_14_DEPTH)

    # 草圖62 → 除料-伸長24 (cut)
    with BuildSketch(Plane(origin=(0, 25.745736365, 0), x_dir=(1, 0, 0), z_dir=(0, 1, 0))):
        with Locations((-28.85, 0)):
            Rectangle(SKETCH_62_W, SKETCH_62_H)
    extrude(amount=-CUT_EXTRUDE_24_DEPTH, mode=Mode.SUBTRACT)

    # 草圖64 → 除料-伸長25 (cut)
    with BuildSketch(Plane(origin=(0, 25.745736365, 0), x_dir=(1, 0, 0), z_dir=(0, 1, 0))):
        with Locations(Location((-8.71, 0, 0), (0, 0, 270))):
            Circle(SKETCH_64_R)
        with Locations(Location((-48.99, 0, 0), (0, 0, 270))):
            Circle(SKETCH_64_R)
    extrude(amount=-CUT_EXTRUDE_25_DEPTH, mode=Mode.SUBTRACT)

    # 圓角3
    # the kernel refuses this fillet: 30 mm, written as the material it takes off along each edge
    with BuildSketch(Plane(origin=(-43.99, 25.745736365, 7.1), x_dir=(-1, 0, 0), z_dir=(0, 0, -1)), Plane(origin=(-13.71, 25.745736365, -7.1), x_dir=(1, 0, 0), z_dir=(0, 0, 1))) as fillet_3_piece_1:
        with BuildLine():
            CenterArc((22.360679775, -30), FILLET_3_R, 90, 48.189685104)
            Line((0, -10), (0, 0))
            Line((0, 0), (22.360679775, 0))
        make_face()
    extrude(amount=14.2, mode=Mode.SUBTRACT)


solid = part.part
